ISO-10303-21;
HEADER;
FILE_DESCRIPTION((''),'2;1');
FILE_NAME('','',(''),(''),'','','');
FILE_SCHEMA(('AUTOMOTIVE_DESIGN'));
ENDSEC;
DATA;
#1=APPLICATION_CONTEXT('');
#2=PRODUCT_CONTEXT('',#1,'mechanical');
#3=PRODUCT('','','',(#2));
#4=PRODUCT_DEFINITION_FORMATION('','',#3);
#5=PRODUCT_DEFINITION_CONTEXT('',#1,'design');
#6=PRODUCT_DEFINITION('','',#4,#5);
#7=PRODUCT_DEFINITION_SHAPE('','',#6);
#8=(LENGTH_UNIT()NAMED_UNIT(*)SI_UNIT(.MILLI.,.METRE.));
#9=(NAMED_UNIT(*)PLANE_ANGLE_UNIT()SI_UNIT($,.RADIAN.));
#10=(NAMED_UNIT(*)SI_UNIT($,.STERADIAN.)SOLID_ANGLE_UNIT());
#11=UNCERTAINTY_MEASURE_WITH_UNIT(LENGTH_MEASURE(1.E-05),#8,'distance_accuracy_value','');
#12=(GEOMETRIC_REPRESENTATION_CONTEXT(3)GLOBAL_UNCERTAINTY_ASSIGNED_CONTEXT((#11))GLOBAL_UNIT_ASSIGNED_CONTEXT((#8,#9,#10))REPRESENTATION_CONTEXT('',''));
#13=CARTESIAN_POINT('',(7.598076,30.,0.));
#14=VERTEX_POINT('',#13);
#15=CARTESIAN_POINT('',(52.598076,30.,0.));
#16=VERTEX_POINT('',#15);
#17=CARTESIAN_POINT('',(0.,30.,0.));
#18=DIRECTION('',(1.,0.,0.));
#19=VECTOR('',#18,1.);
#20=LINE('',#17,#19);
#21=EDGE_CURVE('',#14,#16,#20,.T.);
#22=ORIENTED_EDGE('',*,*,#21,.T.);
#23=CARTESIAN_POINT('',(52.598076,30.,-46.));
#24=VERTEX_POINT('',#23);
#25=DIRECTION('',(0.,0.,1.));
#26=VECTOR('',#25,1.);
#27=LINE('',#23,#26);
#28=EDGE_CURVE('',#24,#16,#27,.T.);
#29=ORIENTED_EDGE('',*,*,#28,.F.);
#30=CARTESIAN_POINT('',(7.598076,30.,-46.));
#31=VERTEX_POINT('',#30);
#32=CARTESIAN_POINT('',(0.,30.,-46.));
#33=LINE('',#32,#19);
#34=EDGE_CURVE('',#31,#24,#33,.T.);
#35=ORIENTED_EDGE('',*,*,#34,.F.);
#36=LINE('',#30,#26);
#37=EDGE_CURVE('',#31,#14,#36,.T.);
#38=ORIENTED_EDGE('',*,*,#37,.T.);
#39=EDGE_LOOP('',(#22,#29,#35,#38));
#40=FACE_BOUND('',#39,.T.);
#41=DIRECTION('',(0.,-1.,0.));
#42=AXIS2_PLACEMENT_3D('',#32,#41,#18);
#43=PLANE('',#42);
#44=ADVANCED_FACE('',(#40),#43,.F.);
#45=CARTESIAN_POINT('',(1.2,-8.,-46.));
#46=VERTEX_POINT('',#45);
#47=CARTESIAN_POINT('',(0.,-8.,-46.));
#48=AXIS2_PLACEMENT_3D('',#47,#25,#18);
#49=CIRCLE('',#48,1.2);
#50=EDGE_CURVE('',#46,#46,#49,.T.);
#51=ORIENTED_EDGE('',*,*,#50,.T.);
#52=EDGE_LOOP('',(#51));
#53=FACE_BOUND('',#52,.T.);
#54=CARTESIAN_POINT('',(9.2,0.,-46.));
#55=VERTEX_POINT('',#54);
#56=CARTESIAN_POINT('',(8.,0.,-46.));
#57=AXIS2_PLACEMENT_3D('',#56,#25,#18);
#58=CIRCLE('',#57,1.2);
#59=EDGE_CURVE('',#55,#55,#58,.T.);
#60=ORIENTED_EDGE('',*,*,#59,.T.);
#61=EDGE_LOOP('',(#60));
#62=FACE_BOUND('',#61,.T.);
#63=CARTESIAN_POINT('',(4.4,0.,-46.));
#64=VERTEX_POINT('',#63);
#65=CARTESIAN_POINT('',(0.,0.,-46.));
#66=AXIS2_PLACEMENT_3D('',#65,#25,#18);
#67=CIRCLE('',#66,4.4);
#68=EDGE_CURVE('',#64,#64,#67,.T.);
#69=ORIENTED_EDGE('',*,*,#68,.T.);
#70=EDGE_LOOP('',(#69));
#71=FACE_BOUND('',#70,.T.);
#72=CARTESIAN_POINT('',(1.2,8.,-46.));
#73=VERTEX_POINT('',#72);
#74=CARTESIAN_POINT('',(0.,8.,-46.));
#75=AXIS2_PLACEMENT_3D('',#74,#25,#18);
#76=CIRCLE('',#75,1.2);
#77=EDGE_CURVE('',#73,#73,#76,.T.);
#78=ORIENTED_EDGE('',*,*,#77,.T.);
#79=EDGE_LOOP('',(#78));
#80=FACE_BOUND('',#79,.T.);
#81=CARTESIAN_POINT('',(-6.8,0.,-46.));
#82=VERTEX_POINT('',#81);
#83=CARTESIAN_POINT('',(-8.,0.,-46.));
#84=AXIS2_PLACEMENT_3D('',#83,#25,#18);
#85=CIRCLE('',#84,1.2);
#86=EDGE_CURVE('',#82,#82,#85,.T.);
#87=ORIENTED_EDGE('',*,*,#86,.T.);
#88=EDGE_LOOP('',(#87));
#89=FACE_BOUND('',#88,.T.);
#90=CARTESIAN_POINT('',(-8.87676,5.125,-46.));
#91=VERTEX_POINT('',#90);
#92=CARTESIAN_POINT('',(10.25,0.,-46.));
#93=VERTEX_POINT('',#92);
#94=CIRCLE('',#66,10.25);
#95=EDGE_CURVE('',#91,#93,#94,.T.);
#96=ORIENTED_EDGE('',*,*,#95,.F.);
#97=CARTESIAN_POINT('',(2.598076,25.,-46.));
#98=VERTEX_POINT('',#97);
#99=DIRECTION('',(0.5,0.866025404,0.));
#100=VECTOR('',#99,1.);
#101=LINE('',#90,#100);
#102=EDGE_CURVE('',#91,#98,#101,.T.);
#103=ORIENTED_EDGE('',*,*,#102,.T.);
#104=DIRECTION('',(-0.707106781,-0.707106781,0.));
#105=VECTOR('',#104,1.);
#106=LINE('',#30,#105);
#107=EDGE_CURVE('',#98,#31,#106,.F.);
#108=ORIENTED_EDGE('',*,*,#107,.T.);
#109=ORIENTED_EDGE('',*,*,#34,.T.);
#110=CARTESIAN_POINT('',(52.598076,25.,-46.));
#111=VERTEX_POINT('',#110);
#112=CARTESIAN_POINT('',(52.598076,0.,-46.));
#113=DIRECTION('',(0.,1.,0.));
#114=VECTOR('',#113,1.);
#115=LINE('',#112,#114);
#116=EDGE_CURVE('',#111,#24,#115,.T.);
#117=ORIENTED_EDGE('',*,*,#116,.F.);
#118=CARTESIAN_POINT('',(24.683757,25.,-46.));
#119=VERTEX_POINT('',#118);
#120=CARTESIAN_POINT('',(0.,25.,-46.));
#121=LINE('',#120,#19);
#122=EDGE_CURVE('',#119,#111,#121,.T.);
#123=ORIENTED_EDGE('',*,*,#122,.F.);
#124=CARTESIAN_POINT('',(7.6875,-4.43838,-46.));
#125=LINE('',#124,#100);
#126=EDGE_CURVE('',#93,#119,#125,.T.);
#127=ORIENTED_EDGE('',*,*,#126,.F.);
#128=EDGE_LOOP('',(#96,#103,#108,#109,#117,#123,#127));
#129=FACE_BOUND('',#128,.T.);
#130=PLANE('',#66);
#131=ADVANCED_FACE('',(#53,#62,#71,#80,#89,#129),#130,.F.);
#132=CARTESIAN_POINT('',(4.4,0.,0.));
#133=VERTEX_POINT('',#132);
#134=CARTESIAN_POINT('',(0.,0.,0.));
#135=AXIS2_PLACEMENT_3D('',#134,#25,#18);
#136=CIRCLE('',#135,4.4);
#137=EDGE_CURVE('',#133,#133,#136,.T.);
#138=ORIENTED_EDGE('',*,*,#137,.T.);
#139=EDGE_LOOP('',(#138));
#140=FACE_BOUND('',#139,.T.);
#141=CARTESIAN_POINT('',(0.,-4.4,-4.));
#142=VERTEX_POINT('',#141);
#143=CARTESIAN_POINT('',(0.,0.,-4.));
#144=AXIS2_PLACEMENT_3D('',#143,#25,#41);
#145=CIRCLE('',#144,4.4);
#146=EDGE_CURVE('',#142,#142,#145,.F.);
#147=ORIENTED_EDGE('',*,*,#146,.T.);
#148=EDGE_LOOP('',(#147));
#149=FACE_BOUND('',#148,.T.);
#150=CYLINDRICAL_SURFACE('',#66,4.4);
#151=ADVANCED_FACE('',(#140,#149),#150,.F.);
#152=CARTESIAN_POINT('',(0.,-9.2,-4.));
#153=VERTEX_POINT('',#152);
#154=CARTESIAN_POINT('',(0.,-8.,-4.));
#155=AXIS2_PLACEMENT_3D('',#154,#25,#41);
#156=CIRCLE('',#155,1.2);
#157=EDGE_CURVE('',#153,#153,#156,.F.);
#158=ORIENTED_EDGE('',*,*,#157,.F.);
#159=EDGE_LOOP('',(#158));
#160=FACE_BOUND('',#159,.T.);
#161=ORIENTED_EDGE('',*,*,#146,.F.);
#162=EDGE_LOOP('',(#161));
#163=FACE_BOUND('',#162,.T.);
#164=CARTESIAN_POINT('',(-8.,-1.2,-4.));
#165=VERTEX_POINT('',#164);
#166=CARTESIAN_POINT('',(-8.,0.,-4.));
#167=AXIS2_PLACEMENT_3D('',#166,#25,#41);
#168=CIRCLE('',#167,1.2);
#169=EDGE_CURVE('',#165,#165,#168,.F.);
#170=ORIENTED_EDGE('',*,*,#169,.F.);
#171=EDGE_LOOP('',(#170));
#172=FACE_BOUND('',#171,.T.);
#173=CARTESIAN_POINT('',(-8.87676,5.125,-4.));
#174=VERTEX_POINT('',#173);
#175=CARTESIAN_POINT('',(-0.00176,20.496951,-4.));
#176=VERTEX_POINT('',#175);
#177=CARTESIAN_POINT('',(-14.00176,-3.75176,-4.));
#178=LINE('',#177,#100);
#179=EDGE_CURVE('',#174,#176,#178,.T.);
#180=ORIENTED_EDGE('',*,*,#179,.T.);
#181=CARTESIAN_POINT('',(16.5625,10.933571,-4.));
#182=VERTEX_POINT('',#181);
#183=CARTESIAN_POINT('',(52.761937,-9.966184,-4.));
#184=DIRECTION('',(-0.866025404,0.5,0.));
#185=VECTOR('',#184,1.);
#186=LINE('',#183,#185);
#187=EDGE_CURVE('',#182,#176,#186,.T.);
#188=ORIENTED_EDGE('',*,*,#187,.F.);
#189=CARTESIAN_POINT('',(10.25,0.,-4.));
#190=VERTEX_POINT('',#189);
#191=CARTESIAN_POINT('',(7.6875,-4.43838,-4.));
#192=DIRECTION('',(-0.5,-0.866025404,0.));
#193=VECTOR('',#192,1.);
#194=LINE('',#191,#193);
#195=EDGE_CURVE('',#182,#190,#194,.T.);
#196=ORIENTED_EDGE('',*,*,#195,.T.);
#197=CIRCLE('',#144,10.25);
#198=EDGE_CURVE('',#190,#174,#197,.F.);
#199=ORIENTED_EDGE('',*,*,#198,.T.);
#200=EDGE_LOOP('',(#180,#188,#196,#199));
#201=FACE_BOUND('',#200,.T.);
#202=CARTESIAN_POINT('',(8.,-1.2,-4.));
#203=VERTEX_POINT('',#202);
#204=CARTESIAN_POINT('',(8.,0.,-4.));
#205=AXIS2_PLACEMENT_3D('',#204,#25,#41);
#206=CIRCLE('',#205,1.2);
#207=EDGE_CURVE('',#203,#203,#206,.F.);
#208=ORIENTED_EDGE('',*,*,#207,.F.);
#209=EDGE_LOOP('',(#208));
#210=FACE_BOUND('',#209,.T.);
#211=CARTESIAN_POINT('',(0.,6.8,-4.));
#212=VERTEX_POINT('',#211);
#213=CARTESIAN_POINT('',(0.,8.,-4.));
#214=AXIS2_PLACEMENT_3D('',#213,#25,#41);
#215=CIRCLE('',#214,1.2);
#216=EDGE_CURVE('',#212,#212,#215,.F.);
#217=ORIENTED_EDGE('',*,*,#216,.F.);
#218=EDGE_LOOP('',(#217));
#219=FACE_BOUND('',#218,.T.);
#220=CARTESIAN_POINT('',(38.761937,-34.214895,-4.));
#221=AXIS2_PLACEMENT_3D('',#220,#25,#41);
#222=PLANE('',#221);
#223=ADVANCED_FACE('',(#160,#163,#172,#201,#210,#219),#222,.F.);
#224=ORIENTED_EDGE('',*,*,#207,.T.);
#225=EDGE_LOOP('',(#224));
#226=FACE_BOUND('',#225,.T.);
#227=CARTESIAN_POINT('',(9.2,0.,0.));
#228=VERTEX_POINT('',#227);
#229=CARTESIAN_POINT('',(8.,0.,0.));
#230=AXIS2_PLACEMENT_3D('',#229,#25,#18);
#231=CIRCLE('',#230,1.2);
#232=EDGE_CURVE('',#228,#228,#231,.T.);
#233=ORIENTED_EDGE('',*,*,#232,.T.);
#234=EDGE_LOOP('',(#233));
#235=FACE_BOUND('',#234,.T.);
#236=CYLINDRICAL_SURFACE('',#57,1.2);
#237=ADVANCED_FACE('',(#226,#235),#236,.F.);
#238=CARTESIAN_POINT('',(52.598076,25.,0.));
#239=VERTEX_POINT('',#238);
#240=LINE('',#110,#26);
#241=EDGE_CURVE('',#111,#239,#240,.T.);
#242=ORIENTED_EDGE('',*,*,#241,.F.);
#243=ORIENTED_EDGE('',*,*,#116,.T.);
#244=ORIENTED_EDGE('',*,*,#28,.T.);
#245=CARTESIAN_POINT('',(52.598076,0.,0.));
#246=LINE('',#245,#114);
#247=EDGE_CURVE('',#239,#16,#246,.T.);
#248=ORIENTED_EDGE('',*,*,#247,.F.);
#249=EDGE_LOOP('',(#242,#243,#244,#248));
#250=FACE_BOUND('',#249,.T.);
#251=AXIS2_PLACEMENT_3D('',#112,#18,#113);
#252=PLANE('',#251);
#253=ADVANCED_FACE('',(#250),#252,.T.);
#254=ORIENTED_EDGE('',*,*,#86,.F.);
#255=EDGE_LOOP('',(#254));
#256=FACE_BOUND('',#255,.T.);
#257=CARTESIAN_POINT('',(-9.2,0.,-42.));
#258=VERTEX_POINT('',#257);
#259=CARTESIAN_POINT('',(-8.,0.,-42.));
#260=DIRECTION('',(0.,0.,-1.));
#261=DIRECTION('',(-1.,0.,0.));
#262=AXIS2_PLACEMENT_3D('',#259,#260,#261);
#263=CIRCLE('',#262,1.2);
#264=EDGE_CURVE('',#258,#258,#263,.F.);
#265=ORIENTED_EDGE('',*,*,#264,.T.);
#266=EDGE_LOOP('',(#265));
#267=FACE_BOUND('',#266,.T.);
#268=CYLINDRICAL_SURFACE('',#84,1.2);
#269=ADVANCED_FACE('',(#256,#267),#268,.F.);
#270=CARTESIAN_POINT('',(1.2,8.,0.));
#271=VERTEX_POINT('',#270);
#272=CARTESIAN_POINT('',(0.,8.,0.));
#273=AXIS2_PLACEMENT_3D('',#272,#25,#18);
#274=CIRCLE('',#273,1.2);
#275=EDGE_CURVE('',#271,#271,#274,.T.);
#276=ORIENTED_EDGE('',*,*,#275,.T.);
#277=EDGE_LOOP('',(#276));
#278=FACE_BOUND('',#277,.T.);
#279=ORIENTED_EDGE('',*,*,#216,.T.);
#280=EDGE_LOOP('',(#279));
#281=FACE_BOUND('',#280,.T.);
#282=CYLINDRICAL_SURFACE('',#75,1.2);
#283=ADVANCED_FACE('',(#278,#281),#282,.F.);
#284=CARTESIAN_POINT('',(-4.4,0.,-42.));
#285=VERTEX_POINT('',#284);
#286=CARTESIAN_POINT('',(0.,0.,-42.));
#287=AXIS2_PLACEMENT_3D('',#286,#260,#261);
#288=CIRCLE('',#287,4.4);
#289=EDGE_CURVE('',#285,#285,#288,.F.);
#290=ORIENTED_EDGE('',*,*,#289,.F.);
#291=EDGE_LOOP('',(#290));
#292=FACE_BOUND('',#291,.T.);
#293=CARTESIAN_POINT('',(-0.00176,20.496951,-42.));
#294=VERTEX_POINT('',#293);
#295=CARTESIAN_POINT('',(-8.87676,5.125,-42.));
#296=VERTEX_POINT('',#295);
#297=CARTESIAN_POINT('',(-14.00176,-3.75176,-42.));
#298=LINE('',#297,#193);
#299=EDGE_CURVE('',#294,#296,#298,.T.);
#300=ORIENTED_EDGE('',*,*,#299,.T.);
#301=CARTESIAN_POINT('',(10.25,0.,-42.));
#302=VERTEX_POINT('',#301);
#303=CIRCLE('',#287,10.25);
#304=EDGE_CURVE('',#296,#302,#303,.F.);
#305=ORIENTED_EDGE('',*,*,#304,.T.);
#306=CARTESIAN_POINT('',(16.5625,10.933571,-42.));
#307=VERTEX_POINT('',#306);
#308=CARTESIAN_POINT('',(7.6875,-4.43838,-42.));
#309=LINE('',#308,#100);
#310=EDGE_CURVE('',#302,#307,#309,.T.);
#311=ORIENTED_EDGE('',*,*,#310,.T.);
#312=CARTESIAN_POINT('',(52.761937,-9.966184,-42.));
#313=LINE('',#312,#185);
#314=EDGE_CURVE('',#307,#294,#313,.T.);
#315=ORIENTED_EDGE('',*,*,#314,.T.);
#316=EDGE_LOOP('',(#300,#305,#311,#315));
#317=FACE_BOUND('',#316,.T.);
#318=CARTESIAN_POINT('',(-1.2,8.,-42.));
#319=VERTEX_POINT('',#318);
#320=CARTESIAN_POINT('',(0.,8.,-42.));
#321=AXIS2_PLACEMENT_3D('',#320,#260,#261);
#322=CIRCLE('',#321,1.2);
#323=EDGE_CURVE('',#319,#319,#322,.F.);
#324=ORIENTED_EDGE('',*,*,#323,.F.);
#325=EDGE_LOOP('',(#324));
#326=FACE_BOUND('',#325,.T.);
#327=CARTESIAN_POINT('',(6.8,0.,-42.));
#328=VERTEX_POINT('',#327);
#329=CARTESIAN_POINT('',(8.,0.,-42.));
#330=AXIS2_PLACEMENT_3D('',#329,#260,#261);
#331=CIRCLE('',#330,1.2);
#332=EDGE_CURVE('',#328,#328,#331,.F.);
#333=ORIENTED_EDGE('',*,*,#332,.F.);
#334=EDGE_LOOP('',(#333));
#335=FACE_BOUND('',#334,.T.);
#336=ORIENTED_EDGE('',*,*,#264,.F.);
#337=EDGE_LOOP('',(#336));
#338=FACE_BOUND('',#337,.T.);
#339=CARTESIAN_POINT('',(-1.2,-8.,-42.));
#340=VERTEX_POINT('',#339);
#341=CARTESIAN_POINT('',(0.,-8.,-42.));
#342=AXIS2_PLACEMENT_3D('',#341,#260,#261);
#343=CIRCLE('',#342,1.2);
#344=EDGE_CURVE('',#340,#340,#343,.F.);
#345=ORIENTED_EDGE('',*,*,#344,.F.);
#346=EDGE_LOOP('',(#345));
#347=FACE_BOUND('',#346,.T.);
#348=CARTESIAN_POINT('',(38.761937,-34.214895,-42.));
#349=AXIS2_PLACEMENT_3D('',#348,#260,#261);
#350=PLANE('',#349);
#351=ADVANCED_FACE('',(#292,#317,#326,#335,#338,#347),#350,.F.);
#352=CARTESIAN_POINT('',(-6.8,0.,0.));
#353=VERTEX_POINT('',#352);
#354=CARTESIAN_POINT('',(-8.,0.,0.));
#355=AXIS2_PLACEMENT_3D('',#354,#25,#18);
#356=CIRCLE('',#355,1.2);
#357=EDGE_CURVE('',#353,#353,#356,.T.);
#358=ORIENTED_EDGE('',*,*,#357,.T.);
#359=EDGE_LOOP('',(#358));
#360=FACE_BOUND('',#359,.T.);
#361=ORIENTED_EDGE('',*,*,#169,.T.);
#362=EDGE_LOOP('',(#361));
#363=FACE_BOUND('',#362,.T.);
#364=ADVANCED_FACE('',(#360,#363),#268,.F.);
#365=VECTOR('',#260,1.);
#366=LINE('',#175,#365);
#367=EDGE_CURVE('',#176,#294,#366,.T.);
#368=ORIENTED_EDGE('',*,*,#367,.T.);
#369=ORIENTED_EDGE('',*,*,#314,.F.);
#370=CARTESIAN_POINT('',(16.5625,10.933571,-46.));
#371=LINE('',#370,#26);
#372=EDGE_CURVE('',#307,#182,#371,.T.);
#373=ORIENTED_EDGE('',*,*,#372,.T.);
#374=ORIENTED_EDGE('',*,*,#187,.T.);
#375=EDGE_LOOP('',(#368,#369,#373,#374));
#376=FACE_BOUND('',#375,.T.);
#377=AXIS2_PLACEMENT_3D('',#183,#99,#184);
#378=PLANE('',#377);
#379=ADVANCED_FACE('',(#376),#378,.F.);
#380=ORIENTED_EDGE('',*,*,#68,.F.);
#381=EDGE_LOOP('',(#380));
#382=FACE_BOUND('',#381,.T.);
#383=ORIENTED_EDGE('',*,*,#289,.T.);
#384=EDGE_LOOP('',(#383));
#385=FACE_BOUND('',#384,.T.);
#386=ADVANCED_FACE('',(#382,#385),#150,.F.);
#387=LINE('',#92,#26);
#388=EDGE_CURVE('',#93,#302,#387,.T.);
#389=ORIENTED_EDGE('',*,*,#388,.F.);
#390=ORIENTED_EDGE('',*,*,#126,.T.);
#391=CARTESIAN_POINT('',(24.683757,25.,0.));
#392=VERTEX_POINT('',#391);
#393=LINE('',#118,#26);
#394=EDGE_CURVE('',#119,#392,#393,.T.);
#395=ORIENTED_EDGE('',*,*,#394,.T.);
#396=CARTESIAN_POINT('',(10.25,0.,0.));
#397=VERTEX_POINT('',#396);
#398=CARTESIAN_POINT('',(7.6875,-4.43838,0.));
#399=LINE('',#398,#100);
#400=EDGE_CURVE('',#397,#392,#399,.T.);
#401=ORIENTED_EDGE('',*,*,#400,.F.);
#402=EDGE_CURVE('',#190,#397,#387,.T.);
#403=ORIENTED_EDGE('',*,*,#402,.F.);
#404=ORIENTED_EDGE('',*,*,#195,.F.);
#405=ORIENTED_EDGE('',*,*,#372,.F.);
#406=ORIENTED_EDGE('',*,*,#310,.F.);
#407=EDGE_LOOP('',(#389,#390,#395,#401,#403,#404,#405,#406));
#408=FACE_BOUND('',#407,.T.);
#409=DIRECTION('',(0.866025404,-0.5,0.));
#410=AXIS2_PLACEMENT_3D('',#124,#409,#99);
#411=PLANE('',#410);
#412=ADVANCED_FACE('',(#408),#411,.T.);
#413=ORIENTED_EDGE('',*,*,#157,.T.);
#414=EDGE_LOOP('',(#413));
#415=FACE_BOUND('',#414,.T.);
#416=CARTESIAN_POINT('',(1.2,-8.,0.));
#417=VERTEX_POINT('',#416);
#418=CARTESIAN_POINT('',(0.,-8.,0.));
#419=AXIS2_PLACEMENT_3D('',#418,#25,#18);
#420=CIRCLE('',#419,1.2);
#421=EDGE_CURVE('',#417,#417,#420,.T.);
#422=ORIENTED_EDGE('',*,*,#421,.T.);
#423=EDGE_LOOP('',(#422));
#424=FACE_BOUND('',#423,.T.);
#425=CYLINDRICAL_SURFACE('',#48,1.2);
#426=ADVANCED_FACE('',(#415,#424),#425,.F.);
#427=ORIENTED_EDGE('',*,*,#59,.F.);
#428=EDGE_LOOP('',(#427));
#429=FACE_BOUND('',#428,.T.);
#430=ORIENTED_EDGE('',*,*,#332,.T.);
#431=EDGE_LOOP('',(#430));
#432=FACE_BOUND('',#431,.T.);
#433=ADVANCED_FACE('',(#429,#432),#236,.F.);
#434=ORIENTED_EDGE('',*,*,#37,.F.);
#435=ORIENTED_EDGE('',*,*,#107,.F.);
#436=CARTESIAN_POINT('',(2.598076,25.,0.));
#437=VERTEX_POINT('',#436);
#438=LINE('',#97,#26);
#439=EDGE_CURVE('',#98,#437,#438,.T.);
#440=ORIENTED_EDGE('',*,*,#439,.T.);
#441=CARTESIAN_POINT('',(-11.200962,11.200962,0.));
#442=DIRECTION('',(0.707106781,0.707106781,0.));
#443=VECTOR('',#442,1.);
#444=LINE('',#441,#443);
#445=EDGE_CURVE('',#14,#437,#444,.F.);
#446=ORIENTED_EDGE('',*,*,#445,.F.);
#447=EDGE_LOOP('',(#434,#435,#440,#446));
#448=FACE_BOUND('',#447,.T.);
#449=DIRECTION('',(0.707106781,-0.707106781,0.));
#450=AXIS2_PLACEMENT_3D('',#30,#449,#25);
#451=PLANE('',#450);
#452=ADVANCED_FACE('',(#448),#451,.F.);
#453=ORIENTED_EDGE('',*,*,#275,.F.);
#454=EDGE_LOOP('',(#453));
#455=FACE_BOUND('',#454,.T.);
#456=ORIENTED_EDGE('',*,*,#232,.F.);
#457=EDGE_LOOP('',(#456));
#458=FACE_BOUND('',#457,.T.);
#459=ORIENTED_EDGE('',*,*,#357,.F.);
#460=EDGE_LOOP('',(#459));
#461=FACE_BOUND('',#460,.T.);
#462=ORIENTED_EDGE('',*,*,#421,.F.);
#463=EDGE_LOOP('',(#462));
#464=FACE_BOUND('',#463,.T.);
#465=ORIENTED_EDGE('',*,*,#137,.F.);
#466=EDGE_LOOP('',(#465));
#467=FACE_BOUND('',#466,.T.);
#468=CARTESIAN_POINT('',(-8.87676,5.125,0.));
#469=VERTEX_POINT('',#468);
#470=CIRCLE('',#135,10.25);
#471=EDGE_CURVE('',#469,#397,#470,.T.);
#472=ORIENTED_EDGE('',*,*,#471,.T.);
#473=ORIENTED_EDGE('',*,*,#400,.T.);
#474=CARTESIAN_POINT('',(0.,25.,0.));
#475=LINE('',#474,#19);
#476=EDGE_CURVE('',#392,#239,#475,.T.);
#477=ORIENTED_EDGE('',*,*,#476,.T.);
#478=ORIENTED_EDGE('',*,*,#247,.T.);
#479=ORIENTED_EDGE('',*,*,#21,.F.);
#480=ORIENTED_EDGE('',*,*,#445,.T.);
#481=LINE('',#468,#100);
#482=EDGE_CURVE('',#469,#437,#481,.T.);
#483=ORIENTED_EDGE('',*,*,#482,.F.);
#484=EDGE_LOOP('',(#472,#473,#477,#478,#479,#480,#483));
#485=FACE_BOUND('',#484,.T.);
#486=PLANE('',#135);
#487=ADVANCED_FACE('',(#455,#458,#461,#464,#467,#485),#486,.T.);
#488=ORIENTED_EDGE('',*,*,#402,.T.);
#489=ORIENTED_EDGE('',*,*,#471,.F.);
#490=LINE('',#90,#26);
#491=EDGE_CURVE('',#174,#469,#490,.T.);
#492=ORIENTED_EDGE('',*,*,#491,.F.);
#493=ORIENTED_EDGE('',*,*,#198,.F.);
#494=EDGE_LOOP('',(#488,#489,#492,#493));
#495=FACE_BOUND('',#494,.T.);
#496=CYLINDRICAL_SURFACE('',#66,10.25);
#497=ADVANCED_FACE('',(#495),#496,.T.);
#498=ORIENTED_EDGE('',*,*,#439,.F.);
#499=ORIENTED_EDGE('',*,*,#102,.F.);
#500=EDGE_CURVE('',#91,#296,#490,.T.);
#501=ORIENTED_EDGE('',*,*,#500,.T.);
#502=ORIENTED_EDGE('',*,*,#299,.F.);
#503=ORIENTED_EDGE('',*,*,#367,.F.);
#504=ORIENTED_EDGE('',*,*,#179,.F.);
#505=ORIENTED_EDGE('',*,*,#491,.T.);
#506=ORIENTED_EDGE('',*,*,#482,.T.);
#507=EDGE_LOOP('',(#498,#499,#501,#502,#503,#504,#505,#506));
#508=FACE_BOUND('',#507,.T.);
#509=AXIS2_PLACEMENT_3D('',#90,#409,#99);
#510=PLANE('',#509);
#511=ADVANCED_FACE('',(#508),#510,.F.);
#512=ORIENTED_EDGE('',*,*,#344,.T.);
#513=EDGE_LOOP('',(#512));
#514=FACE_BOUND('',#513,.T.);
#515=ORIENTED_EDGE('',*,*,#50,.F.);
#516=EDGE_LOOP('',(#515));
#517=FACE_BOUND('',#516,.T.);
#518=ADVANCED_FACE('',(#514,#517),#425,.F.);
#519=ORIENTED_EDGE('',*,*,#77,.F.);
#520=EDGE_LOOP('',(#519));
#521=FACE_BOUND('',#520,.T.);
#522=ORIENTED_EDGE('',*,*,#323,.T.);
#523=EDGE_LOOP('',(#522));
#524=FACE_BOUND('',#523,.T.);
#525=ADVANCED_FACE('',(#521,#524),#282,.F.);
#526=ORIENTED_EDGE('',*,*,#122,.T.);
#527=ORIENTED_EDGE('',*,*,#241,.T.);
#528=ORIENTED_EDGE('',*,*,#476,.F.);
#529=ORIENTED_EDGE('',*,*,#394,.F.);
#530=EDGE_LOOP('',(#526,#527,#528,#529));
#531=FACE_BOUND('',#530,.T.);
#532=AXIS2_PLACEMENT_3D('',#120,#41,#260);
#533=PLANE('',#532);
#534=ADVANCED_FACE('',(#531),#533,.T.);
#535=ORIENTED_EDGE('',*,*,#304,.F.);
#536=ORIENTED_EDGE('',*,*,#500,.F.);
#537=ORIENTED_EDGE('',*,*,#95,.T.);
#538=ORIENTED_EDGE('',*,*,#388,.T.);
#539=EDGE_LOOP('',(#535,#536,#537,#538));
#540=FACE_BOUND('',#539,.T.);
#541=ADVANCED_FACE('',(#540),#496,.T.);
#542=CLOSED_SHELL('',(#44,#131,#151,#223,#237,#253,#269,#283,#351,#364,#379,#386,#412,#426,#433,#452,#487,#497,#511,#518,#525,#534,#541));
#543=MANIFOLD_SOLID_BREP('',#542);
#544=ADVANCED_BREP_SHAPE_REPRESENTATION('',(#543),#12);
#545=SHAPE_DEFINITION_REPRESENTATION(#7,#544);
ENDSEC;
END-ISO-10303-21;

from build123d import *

# Parameters (mm, degrees)
SKETCH1_R           = 4.4
SKETCH1_R_2         = 1.2
BOSS_EXTRUDE1_DEPTH = 46
SKETCH3_W           = 38
SKETCH3_H           = 28
CUT_EXTRUDE2_DEPTH  = 81.708866675
CHAMFER1_SIZE       = 5


with BuildPart() as part:
    # Sketch1 → Boss-Extrude1 (new body)
    with BuildSketch(Plane.XY):
        with BuildLine():
            Line((2.598076211, 25), (-8.876760389, 5.125))
            ThreePointArc((-8.876760389, 5.125), (-2.652895212, -9.900739719), (10.25, 0))
            Line((10.25, 0), (24.68375673, 25))
            Line((24.68375673, 25), (52.598076211, 25))
            Line((52.598076211, 25), (52.598076211, 30))
            Line((52.598076211, 30), (2.598076211, 30))
            Line((2.598076211, 30), (2.598076211, 25))
        make_face()
        Circle(SKETCH1_R, mode=Mode.SUBTRACT)
        with Locations((-8, 0)):
            Circle(SKETCH1_R_2, mode=Mode.SUBTRACT)
        with Locations((0, -8)):
            Circle(SKETCH1_R_2, mode=Mode.SUBTRACT)
        with Locations((8, 0)):
            Circle(SKETCH1_R_2, mode=Mode.SUBTRACT)
        with Locations((0, 8)):
            Circle(SKETCH1_R_2, mode=Mode.SUBTRACT)
    extrude(amount=-BOSS_EXTRUDE1_DEPTH)

    # Sketch3 → Cut-Extrude2 (cut, through all)
    with BuildSketch(Plane(origin=(-8.876760389, 5.125, 0), x_dir=(0, 0, 1), z_dir=(-0.8660254037844363, 0.500000000000004, 0))):
        with Locations((-23, 3.75)):
            Rectangle(SKETCH3_W, SKETCH3_H)
    extrude(amount=-CUT_EXTRUDE2_DEPTH, mode=Mode.SUBTRACT)

    # Chamfer1
    chamfer1_edges = [part.edges().sort_by_distance(p)[0] for p in [
        (2.598076211, 30, -23),
    ]]
    chamfer(chamfer1_edges, length=CHAMFER1_SIZE - 0.0001)  # a hair under: the kernel refuses the full size


solid = part.part
